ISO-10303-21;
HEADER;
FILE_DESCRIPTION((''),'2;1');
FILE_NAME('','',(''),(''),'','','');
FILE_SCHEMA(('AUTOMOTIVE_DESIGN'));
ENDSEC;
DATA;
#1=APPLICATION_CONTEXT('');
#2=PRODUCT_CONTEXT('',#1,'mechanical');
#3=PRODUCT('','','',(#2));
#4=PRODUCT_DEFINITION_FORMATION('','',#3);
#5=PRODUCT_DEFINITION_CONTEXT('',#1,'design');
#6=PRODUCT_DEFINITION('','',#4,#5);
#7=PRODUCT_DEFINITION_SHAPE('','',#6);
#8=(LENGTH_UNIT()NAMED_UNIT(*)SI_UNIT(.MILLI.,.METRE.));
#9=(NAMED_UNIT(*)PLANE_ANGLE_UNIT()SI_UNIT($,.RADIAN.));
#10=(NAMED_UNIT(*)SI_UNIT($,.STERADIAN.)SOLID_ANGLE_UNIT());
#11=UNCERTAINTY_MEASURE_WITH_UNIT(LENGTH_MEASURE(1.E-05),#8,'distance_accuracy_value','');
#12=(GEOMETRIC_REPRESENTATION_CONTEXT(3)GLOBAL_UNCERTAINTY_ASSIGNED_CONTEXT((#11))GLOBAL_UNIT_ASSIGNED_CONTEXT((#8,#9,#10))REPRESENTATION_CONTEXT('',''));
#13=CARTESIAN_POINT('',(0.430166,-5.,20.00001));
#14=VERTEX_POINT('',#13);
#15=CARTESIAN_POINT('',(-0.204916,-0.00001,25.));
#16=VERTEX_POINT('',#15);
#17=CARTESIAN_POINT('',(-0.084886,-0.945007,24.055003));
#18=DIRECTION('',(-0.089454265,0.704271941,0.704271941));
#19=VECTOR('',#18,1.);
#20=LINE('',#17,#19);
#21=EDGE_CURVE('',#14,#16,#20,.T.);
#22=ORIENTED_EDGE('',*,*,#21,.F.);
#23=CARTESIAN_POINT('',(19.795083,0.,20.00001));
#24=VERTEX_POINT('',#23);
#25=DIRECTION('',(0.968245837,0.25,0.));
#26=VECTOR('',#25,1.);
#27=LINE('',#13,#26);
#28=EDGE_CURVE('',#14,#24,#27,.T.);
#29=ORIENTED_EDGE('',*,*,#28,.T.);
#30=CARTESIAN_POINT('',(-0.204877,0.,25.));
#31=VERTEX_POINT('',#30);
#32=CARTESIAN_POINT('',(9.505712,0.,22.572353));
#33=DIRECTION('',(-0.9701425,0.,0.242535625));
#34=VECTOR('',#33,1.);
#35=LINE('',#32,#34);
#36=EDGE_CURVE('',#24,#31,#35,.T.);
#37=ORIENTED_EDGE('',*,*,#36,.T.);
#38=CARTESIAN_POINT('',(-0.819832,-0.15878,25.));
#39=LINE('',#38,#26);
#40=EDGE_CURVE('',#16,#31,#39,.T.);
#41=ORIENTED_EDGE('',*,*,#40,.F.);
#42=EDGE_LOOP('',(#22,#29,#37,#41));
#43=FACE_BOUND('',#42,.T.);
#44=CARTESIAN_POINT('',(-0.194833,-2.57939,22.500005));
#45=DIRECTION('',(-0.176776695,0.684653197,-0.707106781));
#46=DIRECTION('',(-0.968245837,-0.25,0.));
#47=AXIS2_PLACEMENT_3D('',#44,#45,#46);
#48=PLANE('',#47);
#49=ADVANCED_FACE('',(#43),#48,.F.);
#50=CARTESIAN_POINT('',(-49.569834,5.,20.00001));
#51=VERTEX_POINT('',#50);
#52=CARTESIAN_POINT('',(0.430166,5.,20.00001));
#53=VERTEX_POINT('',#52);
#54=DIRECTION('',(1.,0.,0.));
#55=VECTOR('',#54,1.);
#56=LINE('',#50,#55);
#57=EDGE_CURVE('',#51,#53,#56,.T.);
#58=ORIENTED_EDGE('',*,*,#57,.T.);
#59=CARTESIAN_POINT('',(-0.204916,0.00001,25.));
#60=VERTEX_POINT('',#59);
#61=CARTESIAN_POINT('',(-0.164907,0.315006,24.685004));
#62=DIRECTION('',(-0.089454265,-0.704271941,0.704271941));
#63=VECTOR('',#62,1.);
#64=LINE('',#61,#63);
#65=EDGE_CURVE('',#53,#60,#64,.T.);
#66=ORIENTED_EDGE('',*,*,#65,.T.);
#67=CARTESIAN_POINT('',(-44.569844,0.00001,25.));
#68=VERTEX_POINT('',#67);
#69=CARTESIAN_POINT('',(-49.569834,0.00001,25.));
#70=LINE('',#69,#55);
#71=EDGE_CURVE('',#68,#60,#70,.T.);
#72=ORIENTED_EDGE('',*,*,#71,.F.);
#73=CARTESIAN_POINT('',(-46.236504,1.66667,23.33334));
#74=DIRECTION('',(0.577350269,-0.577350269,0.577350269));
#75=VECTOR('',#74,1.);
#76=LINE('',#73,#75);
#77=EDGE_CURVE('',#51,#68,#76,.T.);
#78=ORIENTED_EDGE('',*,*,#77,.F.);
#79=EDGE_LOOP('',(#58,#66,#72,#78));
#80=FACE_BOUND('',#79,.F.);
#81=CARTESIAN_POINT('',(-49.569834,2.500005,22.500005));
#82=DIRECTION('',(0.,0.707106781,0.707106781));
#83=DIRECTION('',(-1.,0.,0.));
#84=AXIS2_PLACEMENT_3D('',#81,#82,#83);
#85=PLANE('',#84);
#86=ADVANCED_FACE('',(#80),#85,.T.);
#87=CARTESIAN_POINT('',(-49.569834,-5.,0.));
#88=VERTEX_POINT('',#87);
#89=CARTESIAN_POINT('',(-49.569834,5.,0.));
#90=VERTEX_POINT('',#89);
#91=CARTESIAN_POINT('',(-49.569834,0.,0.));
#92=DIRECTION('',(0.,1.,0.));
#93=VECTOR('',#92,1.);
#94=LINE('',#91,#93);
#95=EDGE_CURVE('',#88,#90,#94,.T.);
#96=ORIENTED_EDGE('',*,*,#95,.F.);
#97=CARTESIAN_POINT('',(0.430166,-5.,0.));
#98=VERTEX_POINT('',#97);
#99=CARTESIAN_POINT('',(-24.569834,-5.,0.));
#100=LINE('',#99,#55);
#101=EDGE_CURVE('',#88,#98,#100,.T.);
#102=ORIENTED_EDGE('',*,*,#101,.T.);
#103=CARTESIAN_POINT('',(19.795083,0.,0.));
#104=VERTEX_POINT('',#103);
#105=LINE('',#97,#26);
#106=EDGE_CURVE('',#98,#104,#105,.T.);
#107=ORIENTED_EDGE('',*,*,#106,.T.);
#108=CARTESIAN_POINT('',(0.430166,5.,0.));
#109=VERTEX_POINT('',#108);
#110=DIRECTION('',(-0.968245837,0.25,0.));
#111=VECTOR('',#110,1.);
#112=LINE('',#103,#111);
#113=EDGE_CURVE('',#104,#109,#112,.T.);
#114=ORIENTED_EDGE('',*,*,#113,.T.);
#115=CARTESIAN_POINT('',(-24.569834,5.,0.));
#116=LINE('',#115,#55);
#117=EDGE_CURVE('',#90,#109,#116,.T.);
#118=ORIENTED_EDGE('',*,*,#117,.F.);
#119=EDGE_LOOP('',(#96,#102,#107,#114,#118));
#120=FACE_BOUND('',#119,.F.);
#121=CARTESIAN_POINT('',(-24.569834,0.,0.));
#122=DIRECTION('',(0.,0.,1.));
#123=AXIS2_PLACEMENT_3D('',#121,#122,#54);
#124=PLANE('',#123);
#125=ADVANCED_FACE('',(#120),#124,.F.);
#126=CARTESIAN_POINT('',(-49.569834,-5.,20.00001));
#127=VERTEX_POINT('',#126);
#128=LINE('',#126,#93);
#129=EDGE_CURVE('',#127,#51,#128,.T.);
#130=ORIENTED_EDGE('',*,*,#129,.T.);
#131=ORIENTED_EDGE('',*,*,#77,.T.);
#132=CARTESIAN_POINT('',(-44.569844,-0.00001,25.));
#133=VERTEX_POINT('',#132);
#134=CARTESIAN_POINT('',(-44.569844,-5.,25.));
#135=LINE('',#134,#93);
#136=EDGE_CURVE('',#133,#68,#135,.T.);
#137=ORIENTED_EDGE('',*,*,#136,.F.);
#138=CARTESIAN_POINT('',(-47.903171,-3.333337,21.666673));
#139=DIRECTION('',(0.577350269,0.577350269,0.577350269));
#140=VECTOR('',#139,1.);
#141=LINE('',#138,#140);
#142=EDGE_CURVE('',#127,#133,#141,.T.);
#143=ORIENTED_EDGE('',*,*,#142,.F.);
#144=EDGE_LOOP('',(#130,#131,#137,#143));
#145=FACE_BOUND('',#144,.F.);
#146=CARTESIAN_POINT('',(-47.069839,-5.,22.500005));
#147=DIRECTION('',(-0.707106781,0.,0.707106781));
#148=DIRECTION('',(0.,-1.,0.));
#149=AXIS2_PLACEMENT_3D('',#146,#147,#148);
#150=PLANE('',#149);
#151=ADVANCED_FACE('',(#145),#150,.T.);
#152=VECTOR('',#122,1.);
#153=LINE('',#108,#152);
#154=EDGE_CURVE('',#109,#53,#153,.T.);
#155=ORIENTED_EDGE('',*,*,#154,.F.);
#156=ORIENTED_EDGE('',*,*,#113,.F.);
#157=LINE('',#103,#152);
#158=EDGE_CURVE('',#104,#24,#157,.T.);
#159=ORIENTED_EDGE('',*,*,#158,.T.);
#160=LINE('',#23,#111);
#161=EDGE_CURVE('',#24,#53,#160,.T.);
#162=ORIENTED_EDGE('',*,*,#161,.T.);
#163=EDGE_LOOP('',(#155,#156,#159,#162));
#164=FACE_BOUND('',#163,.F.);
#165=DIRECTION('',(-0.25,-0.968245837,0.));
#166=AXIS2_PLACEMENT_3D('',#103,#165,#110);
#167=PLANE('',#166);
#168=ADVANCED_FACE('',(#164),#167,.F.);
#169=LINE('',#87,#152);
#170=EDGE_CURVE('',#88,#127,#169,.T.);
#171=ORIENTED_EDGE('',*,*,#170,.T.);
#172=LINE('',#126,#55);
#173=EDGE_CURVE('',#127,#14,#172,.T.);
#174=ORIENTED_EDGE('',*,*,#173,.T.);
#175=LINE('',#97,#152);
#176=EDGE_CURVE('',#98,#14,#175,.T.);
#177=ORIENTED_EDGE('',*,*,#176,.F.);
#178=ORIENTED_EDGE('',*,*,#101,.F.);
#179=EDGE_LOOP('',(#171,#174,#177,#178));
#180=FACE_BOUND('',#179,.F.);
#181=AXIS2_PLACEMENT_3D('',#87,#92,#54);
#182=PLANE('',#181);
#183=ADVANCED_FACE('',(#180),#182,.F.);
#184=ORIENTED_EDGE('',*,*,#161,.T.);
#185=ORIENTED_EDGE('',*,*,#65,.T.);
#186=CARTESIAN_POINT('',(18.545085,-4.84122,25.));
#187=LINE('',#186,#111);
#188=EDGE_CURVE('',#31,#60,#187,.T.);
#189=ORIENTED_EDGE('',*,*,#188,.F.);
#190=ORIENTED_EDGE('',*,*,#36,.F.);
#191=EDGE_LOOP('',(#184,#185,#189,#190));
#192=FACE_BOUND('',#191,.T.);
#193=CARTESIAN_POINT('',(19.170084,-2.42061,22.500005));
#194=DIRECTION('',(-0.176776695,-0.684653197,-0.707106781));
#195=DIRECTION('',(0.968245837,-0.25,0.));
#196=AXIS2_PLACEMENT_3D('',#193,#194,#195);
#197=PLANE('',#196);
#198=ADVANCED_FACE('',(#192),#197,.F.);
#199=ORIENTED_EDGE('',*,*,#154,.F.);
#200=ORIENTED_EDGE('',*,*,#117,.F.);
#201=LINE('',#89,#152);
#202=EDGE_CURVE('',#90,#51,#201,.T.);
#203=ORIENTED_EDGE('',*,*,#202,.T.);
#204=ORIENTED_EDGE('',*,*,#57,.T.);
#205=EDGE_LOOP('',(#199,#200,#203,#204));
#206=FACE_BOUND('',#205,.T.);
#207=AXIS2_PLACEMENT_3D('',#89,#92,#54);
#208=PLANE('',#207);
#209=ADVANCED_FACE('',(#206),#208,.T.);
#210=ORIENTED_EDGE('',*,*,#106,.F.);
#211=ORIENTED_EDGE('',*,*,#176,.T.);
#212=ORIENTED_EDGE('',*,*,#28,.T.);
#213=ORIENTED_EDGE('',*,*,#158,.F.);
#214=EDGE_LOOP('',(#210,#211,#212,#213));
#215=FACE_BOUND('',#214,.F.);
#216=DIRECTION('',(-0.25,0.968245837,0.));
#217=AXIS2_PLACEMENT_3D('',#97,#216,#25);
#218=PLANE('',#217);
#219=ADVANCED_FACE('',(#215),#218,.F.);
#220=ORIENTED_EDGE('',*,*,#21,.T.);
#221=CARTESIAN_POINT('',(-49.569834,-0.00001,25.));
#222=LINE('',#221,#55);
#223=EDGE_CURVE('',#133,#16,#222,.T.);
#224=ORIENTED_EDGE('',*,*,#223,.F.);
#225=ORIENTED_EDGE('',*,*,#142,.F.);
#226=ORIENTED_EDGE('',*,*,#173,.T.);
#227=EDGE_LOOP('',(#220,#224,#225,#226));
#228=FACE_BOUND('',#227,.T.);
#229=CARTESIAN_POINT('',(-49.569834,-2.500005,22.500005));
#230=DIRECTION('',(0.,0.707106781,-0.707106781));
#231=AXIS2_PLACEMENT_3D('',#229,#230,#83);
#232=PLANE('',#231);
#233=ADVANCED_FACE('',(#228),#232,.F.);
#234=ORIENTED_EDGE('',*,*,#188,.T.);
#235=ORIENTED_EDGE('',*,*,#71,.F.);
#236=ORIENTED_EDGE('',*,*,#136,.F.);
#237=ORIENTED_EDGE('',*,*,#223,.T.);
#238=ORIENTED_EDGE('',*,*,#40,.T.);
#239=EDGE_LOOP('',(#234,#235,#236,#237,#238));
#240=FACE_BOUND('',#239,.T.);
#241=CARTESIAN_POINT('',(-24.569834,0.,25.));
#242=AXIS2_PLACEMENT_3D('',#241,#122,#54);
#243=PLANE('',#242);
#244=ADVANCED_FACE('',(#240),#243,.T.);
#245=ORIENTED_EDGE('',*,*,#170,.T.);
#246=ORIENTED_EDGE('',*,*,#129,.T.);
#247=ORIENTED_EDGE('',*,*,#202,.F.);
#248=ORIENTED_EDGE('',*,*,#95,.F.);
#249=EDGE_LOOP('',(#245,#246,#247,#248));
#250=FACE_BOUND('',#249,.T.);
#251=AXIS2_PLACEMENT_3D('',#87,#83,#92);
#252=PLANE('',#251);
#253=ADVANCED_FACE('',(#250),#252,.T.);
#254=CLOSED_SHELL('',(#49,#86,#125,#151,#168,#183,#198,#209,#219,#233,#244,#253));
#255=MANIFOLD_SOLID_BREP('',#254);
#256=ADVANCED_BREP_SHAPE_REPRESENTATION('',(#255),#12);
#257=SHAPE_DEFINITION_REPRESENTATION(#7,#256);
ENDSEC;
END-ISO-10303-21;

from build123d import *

# Parameters (mm, degrees)
F0_W     = 50
F0_H     = 10
F1_DEPTH = 25
F2_SIZE  = 4.99999


# Not quite as in the source:
# - a fillet or chamfer is up to 0.001 mm smaller than in the source, because OpenCascade refuses the exact size


with BuildPart() as f1:
    # F0 (on Top) → F1 (new body)
    with BuildSketch(Plane.XY):
        with Locations((-24.5698342215, 0)):
            Rectangle(F0_W, F0_H)
        Polygon((0.4301657785, 5), (0.4301657785, -5), (19.7950825095, 0), align=None)
    extrude(amount=F1_DEPTH)

    # F2 (size 5 in the source; OpenCascade refuses exactly that, so slightly less here)
    f2_edges = [f1.edges().sort_by_distance(p)[0] for p in [
        (-24.569834, -5, 25),
        (-49.569834, 0, 25),
        (-24.569834, 5, 25),
        (10.112624, 2.5, 25),
        (10.112624, -2.5, 25),
    ]]
    chamfer(f2_edges, length=F2_SIZE)


solid = f1.part
